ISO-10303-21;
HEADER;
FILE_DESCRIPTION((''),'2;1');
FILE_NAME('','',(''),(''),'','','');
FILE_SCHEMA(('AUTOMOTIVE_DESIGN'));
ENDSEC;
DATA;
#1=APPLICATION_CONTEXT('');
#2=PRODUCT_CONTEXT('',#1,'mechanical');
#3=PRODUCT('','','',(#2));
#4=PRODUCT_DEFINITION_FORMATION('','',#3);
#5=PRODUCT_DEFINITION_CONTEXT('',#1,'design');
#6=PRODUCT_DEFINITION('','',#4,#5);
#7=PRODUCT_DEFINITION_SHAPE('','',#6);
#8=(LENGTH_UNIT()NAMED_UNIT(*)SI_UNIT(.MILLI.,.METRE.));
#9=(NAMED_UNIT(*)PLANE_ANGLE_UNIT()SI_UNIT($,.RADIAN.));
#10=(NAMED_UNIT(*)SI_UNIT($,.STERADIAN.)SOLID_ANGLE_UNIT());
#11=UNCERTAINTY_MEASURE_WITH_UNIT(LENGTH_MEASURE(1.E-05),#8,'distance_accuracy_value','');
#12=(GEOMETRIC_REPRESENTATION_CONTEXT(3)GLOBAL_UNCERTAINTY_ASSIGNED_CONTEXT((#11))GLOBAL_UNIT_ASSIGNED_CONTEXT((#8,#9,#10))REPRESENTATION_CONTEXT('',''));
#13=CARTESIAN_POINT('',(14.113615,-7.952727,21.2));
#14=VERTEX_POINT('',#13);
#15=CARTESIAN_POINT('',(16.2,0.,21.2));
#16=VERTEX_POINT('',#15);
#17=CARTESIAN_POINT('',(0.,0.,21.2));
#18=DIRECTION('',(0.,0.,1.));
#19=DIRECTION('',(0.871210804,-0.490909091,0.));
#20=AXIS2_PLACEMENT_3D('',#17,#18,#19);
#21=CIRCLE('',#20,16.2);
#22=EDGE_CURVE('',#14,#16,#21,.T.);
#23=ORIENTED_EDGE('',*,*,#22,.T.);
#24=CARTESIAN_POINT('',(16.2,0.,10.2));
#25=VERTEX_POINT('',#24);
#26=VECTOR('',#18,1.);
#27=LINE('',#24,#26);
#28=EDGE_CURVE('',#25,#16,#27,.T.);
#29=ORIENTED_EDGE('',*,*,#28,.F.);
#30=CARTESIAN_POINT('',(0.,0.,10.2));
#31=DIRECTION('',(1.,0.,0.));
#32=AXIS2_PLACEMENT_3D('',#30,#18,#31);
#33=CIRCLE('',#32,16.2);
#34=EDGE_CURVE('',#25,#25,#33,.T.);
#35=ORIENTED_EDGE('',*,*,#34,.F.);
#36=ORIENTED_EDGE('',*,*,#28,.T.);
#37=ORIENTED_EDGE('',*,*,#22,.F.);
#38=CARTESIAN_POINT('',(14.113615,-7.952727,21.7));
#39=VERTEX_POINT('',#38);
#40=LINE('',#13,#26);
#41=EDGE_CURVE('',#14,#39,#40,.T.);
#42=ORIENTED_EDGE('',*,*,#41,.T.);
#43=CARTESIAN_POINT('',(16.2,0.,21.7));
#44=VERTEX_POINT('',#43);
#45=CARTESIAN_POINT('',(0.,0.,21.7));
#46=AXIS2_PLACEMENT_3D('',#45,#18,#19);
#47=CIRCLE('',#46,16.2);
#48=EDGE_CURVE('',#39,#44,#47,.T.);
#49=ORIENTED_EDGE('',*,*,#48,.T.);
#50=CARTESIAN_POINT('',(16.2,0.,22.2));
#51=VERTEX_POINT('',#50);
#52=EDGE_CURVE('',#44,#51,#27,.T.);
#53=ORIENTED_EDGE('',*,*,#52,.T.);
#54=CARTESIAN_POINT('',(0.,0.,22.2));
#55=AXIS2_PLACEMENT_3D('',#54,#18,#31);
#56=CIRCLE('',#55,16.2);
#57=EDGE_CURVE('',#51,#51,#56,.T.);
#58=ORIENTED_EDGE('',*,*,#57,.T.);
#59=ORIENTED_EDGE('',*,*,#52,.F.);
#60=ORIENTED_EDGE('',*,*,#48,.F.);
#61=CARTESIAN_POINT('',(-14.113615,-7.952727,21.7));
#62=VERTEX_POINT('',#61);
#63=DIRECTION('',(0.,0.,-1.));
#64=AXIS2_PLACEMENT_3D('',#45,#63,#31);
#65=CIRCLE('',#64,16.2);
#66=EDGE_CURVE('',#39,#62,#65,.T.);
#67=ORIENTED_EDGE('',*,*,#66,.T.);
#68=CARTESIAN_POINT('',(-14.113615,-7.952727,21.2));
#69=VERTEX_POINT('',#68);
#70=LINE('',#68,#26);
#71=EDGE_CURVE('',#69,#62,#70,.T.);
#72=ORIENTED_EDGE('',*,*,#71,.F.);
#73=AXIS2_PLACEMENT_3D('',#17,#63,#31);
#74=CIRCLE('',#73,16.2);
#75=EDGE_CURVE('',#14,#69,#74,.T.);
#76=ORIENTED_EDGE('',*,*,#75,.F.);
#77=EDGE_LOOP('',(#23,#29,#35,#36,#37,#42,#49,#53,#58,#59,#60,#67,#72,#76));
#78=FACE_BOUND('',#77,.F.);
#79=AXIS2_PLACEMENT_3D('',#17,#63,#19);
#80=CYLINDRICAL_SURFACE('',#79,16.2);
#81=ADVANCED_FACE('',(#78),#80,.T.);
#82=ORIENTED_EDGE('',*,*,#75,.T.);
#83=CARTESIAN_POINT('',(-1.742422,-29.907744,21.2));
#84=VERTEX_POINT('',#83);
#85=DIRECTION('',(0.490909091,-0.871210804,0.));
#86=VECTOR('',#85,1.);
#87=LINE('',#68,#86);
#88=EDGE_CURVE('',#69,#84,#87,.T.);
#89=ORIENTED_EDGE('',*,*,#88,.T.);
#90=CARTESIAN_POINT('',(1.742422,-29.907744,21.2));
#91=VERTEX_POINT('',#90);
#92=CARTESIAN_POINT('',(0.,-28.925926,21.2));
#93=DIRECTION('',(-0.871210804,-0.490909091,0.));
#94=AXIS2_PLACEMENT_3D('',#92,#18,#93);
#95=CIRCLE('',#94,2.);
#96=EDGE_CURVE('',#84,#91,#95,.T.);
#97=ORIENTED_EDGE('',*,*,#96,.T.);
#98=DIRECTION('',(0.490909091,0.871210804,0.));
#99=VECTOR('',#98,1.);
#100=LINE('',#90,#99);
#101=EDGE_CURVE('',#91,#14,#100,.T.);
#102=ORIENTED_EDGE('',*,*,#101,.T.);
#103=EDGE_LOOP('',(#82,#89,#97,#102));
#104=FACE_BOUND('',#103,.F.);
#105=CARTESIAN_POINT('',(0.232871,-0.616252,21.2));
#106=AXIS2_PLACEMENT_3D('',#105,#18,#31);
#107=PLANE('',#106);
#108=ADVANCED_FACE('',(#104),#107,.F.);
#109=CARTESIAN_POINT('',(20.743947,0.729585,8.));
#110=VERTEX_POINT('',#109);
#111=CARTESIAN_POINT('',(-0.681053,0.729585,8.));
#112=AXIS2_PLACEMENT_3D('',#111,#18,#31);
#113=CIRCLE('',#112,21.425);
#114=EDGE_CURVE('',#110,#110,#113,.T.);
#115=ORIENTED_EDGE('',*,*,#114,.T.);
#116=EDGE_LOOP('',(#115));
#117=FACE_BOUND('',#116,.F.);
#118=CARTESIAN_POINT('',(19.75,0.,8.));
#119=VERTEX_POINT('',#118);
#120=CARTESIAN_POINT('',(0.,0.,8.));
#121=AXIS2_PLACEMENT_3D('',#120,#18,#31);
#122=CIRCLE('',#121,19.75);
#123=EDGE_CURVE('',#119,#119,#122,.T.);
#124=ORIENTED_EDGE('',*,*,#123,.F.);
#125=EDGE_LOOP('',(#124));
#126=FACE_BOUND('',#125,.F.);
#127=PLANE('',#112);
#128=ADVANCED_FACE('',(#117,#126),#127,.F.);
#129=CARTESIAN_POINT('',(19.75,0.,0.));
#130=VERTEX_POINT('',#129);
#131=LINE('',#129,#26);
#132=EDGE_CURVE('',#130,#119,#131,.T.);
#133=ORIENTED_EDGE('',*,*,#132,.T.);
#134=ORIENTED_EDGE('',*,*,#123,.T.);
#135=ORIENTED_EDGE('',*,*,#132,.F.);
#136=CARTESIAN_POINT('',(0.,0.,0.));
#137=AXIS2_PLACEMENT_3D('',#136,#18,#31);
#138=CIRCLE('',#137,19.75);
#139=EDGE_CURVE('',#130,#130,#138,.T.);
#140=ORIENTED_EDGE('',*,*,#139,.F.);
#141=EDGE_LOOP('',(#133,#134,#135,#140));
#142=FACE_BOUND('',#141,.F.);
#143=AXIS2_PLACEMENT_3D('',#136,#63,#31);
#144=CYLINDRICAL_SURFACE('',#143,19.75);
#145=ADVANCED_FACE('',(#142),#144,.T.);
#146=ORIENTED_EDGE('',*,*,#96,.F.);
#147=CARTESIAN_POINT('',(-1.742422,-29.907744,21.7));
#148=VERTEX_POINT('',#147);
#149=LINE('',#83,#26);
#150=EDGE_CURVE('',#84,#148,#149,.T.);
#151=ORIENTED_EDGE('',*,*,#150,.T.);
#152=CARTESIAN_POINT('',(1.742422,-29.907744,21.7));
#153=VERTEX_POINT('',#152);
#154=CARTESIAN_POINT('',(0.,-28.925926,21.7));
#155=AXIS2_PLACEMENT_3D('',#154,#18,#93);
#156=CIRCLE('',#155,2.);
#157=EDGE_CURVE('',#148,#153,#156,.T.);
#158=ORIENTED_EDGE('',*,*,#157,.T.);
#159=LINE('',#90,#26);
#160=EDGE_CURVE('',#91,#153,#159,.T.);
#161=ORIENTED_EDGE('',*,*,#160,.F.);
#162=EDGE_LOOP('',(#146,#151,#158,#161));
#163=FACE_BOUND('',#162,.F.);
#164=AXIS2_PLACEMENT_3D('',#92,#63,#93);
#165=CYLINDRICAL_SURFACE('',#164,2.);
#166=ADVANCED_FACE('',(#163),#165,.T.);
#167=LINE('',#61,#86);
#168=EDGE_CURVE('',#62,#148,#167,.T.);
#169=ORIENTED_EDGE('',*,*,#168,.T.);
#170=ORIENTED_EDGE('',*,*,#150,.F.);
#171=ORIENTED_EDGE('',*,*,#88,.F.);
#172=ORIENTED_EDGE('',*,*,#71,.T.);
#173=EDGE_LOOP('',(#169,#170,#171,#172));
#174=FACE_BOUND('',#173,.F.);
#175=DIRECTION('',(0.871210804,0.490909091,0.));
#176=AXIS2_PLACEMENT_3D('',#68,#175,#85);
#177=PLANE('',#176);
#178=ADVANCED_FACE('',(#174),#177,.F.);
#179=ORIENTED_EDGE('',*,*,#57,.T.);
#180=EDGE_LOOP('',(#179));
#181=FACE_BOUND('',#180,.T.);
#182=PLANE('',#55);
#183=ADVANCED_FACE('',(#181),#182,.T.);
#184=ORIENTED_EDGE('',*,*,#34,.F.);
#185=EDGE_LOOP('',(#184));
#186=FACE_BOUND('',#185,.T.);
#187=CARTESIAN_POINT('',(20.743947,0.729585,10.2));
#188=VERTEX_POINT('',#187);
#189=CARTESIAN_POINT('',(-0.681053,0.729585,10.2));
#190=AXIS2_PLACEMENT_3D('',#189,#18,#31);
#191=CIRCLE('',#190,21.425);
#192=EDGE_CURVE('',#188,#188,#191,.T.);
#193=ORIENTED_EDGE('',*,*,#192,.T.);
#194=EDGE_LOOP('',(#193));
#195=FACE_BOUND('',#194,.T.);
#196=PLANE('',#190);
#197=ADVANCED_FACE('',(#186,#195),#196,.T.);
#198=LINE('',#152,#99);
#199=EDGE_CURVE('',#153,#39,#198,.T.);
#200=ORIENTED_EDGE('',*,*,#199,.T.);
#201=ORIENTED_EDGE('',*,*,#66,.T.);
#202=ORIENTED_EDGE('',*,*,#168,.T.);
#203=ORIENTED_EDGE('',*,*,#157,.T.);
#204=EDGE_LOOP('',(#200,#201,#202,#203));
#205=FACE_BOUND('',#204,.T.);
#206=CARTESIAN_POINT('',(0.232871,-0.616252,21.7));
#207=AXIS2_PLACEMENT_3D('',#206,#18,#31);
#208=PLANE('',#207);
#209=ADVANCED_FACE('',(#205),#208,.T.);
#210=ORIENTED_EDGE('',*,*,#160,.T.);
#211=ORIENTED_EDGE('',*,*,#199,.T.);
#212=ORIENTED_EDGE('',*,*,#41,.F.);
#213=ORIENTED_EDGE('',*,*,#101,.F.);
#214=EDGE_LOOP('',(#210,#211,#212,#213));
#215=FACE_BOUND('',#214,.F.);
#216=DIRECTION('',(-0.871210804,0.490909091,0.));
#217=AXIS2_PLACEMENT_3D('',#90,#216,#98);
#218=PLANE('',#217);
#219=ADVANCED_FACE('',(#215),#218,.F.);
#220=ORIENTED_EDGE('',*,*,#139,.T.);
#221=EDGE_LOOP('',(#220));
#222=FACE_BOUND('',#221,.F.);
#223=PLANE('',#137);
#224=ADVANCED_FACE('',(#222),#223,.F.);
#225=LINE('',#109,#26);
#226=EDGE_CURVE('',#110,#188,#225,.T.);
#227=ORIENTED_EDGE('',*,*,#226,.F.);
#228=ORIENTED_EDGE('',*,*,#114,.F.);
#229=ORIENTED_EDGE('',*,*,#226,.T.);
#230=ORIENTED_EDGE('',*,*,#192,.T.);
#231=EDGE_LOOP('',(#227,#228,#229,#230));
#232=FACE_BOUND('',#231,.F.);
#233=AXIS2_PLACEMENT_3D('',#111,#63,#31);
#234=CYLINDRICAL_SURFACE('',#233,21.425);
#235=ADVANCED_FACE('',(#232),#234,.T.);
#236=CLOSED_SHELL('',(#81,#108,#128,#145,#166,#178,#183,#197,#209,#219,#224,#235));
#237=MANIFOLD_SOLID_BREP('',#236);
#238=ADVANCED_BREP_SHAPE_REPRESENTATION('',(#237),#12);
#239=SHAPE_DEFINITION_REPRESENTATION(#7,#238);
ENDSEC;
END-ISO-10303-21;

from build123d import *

# Parameters (mm, degrees)
F0_R      = 19.75
F1_DEPTH  = 8
F2_R      = 21.425
F3_DEPTH  = 2.2
F4_R      = 16.2
F5_DEPTH  = 12
F10_DEPTH = 0.5


# Not quite as in the source:
# - the program builds the solid bodies; features that only make, move or delete a surface that nothing else refers to are left out


with BuildPart() as f1:
    # F0 (on Top) → F1 (new body)
    with BuildSketch(Plane.XY):
        Circle(F0_R)
    extrude(amount=F1_DEPTH)

    # F2 (on face) → F3 (join)
    with BuildSketch(Plane.XY.offset(8)):
        with Locations((-0.6810527993, 0.7295852411)):
            Circle(F2_R)
    extrude(amount=F3_DEPTH)

    # F4 (on face) → F5 (join)
    with BuildSketch(Plane.XY.offset(10.2)):
        Circle(F4_R)
    extrude(amount=F5_DEPTH)

    # F7 (on offset) → F10 (join)
    with BuildSketch(Plane.XY.offset(21.2)):
        with BuildLine():
            ThreePointArc((14.1136150197, -7.9527272727), (15.6697250027, -4.1109267009), (16.2, 0))
            ThreePointArc((16.2, 0), (-4.1109267009, 15.6697250027), (-14.1136150197, -7.9527272727))
            ThreePointArc((-14.1136150197, -7.9527272727), (0, -16.2), (14.1136150197, -7.9527272727))
        make_face()
        with BuildLine():
            ThreePointArc((14.1136150197, -7.9527272727), (0, -16.2), (-14.1136150197, -7.9527272727))
            Line((-14.1136150197, -7.9527272727), (-1.7424216074, -29.9077441077))
            ThreePointArc((-1.7424216074, -29.9077441077), (0, -30.9259259259), (1.7424216074, -29.9077441077))
            Line((1.7424216074, -29.9077441077), (14.1136150197, -7.9527272727))
        make_face()
    extrude(amount=F10_DEPTH)


solid = f1.part
